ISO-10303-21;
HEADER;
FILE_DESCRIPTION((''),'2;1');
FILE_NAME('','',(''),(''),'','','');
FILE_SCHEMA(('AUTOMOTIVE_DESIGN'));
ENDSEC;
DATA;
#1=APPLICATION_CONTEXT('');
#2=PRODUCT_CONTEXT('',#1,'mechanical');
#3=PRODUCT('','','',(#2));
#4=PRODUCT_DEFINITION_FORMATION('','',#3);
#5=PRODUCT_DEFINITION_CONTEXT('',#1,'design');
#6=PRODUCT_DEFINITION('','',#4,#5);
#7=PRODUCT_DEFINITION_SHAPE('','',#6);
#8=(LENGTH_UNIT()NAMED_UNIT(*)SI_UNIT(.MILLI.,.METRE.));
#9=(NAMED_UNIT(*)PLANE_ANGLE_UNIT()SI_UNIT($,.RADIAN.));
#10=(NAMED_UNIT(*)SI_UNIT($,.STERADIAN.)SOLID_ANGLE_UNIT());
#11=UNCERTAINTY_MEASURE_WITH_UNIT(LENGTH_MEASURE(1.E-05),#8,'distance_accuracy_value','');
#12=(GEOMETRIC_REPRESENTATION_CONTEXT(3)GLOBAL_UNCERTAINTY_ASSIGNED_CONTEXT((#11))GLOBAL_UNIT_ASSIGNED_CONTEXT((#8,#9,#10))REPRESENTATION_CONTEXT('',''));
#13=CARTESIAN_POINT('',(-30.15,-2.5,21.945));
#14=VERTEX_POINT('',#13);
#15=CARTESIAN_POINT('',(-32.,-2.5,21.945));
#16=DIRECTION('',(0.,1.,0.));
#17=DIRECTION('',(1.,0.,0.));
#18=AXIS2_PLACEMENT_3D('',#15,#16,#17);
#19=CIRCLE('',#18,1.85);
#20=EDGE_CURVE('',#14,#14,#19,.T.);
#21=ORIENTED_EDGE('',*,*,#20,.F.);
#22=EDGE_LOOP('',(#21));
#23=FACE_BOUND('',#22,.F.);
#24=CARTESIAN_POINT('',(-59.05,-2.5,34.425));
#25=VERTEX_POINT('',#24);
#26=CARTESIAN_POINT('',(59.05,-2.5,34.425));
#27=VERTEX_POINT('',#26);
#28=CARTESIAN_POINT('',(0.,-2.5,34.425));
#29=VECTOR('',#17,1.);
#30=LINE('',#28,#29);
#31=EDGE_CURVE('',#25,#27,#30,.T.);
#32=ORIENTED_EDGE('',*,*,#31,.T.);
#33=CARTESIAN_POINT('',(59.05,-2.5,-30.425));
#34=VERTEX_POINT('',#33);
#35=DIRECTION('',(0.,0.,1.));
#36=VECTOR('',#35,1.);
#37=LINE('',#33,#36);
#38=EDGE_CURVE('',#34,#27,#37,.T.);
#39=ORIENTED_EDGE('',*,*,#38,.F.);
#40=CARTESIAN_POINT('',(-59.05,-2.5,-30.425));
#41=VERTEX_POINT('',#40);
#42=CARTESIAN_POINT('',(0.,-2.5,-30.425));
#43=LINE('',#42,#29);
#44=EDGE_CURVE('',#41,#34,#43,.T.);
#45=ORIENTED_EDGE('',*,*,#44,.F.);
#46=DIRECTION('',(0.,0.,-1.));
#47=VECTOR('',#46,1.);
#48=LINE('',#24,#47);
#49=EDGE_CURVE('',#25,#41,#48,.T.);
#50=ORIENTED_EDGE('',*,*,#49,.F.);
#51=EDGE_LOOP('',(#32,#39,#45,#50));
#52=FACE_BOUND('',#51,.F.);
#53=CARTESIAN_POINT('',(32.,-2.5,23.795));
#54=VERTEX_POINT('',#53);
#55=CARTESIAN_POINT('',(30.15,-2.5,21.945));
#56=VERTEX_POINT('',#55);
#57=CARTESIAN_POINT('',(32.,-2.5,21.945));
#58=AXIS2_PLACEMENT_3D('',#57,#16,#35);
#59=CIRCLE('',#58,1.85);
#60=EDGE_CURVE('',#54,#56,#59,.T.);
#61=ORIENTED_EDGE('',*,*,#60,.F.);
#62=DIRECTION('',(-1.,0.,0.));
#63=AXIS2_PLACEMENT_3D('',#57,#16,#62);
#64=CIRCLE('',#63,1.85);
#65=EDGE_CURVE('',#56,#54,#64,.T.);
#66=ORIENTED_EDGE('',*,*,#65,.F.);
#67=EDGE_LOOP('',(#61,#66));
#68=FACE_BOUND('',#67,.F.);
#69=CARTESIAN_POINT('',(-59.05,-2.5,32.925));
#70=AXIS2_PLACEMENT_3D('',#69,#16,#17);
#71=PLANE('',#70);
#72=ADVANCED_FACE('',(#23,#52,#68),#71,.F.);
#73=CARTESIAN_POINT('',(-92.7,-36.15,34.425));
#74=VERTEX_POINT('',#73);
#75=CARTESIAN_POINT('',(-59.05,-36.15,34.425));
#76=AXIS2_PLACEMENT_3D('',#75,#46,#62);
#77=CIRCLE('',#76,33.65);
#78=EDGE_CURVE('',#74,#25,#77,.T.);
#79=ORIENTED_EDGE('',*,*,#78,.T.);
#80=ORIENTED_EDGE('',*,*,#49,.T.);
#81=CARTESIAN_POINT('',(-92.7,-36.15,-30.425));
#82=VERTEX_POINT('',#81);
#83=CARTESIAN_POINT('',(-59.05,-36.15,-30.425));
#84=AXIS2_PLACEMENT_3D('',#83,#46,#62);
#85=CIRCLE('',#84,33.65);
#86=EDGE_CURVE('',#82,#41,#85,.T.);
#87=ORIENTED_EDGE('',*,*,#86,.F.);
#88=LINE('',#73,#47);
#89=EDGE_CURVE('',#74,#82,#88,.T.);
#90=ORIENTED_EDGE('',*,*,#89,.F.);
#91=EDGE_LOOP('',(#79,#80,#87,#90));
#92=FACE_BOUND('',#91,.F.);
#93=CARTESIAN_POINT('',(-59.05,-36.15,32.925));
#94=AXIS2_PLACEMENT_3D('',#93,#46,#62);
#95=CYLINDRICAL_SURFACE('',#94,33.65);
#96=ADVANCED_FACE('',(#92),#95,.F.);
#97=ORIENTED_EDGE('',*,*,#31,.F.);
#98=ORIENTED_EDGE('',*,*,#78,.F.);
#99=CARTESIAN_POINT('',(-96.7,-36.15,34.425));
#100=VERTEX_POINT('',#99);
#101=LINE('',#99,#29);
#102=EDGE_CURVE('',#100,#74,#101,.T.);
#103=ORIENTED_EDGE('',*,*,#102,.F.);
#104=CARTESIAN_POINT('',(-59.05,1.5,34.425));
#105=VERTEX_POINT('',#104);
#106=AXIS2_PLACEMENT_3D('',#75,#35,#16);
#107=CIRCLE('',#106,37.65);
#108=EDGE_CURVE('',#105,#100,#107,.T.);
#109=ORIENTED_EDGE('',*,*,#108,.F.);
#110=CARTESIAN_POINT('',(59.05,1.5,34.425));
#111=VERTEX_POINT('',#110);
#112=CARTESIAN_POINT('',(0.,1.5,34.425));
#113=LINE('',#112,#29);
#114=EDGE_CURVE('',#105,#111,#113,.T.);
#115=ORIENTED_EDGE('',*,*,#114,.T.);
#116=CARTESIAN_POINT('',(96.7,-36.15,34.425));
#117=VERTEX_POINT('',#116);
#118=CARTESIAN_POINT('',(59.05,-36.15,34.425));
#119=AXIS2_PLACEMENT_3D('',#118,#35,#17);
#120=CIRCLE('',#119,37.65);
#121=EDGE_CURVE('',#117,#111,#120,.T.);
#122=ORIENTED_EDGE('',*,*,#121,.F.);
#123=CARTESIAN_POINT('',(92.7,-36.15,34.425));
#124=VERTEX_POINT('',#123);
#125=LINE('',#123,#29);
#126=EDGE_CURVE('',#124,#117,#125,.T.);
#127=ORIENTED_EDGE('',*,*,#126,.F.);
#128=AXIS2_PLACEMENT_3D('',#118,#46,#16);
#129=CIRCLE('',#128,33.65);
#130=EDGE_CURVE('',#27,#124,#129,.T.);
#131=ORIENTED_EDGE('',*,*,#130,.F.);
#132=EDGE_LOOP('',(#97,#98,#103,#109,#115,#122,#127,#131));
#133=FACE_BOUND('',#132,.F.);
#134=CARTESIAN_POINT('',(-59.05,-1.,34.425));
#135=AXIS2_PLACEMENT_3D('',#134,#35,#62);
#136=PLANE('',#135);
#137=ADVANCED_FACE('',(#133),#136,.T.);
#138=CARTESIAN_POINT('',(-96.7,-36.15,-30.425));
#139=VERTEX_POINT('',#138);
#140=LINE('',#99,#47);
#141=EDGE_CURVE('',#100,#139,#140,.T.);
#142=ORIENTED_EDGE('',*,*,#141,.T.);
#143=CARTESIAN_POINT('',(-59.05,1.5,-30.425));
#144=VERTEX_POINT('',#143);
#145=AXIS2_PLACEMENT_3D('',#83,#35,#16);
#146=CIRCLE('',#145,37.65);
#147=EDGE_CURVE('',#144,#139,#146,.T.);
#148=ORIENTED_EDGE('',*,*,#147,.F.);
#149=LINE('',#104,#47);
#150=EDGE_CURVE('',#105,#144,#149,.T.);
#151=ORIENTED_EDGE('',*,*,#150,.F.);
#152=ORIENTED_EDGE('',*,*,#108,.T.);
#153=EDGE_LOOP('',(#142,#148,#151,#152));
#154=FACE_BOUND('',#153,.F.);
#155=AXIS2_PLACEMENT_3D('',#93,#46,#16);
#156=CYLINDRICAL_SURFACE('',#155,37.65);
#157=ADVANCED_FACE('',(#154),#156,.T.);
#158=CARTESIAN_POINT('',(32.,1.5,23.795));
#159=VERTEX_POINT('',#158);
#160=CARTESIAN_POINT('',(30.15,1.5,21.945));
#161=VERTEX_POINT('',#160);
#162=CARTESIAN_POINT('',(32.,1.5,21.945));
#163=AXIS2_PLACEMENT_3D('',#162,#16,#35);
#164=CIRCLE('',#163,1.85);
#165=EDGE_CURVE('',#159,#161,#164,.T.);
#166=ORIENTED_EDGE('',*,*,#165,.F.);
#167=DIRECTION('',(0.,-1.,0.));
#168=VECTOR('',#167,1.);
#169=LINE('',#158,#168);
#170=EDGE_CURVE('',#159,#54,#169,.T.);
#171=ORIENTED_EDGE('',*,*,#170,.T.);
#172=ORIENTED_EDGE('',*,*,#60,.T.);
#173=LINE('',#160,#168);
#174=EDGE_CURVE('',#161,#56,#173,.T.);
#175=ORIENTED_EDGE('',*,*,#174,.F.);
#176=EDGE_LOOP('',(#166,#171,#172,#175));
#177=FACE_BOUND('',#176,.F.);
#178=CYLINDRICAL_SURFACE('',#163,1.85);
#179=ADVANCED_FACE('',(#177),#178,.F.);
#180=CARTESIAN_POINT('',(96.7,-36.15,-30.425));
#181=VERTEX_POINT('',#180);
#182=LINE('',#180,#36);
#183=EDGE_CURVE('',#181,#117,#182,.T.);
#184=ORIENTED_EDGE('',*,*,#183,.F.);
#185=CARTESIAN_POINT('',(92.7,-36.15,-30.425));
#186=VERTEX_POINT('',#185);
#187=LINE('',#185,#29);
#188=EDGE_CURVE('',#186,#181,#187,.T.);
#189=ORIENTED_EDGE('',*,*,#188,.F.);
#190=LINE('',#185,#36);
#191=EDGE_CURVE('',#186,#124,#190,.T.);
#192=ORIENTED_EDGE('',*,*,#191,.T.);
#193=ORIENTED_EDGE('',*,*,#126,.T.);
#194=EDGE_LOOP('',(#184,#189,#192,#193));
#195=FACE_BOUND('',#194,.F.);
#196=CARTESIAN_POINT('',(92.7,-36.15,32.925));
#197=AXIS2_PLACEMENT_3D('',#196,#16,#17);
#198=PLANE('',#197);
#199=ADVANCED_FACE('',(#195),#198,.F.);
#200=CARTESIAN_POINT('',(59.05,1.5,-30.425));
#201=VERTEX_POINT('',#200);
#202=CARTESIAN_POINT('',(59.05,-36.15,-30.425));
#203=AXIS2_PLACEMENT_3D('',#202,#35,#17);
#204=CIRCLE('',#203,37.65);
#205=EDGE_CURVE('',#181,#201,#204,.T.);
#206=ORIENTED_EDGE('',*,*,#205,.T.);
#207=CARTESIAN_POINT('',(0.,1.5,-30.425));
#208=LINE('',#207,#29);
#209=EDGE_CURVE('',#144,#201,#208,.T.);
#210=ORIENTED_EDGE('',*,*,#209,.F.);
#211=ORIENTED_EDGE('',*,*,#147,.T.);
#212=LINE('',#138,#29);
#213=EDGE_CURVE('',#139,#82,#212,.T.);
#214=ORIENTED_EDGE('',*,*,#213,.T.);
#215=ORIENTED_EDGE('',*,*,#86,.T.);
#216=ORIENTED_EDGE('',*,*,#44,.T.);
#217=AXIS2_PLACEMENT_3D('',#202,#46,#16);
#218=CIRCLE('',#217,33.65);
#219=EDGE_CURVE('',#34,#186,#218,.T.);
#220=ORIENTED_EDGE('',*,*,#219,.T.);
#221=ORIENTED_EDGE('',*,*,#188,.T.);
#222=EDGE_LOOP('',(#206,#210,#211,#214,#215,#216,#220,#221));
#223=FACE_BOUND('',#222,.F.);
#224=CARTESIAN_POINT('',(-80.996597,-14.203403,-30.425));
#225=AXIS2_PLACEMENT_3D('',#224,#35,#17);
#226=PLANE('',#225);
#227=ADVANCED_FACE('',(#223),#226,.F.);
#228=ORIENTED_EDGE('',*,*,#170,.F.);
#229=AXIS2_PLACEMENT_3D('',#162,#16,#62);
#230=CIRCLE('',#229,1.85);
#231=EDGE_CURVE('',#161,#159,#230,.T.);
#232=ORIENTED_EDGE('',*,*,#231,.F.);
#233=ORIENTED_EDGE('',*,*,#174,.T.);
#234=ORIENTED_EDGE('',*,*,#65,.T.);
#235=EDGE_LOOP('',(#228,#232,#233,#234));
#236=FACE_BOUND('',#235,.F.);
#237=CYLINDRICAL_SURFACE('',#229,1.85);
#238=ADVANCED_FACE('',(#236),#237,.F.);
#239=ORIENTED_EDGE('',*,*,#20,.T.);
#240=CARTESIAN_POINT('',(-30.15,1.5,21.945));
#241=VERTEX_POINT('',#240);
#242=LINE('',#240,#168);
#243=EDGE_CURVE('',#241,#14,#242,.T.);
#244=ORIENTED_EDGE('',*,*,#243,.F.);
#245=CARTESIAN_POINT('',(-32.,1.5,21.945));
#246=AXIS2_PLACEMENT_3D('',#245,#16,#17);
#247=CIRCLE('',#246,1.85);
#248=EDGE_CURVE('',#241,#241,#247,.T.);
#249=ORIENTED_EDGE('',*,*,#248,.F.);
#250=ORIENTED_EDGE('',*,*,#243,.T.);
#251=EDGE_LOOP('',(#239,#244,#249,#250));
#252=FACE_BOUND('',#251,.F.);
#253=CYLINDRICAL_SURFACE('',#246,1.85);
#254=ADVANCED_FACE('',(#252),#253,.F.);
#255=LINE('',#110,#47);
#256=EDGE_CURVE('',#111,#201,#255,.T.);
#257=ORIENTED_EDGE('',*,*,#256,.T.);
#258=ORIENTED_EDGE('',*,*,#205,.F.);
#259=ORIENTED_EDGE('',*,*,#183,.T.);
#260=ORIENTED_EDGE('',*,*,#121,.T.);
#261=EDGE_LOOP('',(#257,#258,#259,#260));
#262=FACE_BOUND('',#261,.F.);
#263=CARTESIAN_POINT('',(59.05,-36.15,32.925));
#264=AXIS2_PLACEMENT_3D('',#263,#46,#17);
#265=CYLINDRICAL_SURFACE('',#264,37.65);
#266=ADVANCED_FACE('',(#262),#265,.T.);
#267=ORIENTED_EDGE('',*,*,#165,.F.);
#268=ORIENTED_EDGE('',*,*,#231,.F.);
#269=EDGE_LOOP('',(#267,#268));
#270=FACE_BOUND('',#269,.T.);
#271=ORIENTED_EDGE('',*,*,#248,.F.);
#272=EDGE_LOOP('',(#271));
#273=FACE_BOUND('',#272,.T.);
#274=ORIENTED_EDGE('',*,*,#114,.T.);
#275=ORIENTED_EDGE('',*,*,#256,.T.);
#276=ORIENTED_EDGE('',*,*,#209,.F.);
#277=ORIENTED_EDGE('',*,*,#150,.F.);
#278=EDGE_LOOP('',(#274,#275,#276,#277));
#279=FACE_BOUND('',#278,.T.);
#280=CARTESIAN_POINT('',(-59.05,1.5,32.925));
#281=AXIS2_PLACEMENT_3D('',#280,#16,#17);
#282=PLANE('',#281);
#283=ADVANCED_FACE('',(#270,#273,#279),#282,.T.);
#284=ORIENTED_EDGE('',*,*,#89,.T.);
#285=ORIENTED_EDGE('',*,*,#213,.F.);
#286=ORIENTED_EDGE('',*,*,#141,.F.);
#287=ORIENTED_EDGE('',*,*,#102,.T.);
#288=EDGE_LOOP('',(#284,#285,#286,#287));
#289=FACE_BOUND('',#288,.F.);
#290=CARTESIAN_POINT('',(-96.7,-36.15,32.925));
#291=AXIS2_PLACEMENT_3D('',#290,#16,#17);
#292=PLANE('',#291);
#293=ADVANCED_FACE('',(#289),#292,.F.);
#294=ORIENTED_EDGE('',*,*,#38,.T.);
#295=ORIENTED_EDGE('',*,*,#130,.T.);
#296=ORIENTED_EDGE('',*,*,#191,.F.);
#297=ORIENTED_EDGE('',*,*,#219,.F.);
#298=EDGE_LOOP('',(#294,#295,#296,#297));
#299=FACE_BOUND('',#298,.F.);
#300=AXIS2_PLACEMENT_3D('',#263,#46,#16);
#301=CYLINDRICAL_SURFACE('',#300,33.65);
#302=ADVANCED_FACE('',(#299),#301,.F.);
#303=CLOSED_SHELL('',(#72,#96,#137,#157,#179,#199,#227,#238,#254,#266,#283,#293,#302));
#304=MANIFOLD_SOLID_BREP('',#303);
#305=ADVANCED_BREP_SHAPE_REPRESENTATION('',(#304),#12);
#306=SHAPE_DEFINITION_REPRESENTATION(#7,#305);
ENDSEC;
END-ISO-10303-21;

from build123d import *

# Parameters (mm, degrees)
F0_W     = 118.1
F0_H     = 60.85
F1_DEPTH = 2.5
F4_DEPTH = 32.925
F5_DEPTH = 30.425
F6_DEPTH = 2.5
F7_DEPTH = 1.5
F9_DEPTH = 25


# Not quite as in the source:
# - a feature of the source that left no trace in its solid (it failed there, or was rolled back) is left out
# - a pattern or mirror of a feature is missing from the dataset's text; its kind, count and spacing are read off the source's solid


with BuildPart() as f1:
    # F0 (on Front) → F1 (new body)
    with BuildSketch(Plane.XZ):
        Rectangle(F0_W, F0_H)
    extrude(amount=F1_DEPTH)

    # F1_copies: F1 across plane


with BuildPart() as f1_1:
    add(f1.part)
    add(f1.part.mirror(Plane.ZX.offset(-0.5)))

    # F3 (on Top) → F4 (join)
    with BuildSketch(Plane.XY):
        with BuildLine():
            ThreePointArc((-92.7, -36.15), (-82.8441431869, -12.3558568131), (-59.05, -2.5))
            Line((-59.05, -2.5), (-59.05, 0))
            Line((-59.05, 0), (-59.05, 1.5))
            ThreePointArc((-59.05, 1.5), (-85.6725703117, -9.5274296883), (-96.7, -36.15))
            Line((-96.7, -36.15), (-95.2, -36.15))
            Line((-95.2, -36.15), (-92.7, -36.15))
        make_face()
        with BuildLine():
            ThreePointArc((59.05, -2.5), (82.8441431869, -12.3558568131), (92.7, -36.15))
            Line((92.7, -36.15), (95.2, -36.15))
            Line((95.2, -36.15), (96.7, -36.15))
            ThreePointArc((96.7, -36.15), (85.6725703117, -9.5274296883), (59.05, 1.5))
            Line((59.05, 1.5), (59.05, 0))
            Line((59.05, 0), (59.05, -2.5))
        make_face()
    extrude(amount=F4_DEPTH)

    # F3 (on Top) → F5 (join)
    with BuildSketch(Plane.XY):
        with BuildLine():
            ThreePointArc((-92.7, -36.15), (-82.8441431869, -12.3558568131), (-59.05, -2.5))
            Line((-59.05, -2.5), (-59.05, 0))
            Line((-59.05, 0), (-59.05, 1.5))
            ThreePointArc((-59.05, 1.5), (-85.6725703117, -9.5274296883), (-96.7, -36.15))
            Line((-96.7, -36.15), (-95.2, -36.15))
            Line((-95.2, -36.15), (-92.7, -36.15))
        make_face()
        with BuildLine():
            ThreePointArc((59.05, -2.5), (82.8441431869, -12.3558568131), (92.7, -36.15))
            Line((92.7, -36.15), (95.2, -36.15))
            Line((95.2, -36.15), (96.7, -36.15))
            ThreePointArc((96.7, -36.15), (85.6725703117, -9.5274296883), (59.05, 1.5))
            Line((59.05, 1.5), (59.05, 0))
            Line((59.05, 0), (59.05, -2.5))
        make_face()
    extrude(amount=-F5_DEPTH)

    # F6 (add): a face of the model
    f6_faces = [f1_1.faces().sort_by_distance(p)[0] for p in [
        (0, -0.5, 30.425),
    ]]
    extrude(f6_faces, amount=F6_DEPTH)

    # F7 (add): a face of the model
    f7_faces = [f1_1.faces().sort_by_distance(p)[0] for p in [
        (84.2373603721, -10.9626396279, 32.925),
    ]]
    extrude(f7_faces, amount=F7_DEPTH)

    # F8 (on face) → F9 (cut)
    with BuildSketch(Plane(origin=(0, 1.5, 0), x_dir=(-1, 0, 0), z_dir=(0, 1, 0))):
        with BuildLine():
            ThreePointArc((33.85, 21.945), (32, 23.795), (30.15, 21.945))
            ThreePointArc((30.15, 21.945), (32, 20.095), (33.85, 21.945))
        make_face()
        with BuildLine():
            ThreePointArc((-32, 23.795), (-33.3081475452, 20.6368524548), (-30.15, 21.945))
            ThreePointArc((-30.15, 21.945), (-30.6918524548, 23.2531475452), (-32, 23.795))
        make_face()
    extrude(amount=-F9_DEPTH, mode=Mode.SUBTRACT)


solid = f1_1.part
